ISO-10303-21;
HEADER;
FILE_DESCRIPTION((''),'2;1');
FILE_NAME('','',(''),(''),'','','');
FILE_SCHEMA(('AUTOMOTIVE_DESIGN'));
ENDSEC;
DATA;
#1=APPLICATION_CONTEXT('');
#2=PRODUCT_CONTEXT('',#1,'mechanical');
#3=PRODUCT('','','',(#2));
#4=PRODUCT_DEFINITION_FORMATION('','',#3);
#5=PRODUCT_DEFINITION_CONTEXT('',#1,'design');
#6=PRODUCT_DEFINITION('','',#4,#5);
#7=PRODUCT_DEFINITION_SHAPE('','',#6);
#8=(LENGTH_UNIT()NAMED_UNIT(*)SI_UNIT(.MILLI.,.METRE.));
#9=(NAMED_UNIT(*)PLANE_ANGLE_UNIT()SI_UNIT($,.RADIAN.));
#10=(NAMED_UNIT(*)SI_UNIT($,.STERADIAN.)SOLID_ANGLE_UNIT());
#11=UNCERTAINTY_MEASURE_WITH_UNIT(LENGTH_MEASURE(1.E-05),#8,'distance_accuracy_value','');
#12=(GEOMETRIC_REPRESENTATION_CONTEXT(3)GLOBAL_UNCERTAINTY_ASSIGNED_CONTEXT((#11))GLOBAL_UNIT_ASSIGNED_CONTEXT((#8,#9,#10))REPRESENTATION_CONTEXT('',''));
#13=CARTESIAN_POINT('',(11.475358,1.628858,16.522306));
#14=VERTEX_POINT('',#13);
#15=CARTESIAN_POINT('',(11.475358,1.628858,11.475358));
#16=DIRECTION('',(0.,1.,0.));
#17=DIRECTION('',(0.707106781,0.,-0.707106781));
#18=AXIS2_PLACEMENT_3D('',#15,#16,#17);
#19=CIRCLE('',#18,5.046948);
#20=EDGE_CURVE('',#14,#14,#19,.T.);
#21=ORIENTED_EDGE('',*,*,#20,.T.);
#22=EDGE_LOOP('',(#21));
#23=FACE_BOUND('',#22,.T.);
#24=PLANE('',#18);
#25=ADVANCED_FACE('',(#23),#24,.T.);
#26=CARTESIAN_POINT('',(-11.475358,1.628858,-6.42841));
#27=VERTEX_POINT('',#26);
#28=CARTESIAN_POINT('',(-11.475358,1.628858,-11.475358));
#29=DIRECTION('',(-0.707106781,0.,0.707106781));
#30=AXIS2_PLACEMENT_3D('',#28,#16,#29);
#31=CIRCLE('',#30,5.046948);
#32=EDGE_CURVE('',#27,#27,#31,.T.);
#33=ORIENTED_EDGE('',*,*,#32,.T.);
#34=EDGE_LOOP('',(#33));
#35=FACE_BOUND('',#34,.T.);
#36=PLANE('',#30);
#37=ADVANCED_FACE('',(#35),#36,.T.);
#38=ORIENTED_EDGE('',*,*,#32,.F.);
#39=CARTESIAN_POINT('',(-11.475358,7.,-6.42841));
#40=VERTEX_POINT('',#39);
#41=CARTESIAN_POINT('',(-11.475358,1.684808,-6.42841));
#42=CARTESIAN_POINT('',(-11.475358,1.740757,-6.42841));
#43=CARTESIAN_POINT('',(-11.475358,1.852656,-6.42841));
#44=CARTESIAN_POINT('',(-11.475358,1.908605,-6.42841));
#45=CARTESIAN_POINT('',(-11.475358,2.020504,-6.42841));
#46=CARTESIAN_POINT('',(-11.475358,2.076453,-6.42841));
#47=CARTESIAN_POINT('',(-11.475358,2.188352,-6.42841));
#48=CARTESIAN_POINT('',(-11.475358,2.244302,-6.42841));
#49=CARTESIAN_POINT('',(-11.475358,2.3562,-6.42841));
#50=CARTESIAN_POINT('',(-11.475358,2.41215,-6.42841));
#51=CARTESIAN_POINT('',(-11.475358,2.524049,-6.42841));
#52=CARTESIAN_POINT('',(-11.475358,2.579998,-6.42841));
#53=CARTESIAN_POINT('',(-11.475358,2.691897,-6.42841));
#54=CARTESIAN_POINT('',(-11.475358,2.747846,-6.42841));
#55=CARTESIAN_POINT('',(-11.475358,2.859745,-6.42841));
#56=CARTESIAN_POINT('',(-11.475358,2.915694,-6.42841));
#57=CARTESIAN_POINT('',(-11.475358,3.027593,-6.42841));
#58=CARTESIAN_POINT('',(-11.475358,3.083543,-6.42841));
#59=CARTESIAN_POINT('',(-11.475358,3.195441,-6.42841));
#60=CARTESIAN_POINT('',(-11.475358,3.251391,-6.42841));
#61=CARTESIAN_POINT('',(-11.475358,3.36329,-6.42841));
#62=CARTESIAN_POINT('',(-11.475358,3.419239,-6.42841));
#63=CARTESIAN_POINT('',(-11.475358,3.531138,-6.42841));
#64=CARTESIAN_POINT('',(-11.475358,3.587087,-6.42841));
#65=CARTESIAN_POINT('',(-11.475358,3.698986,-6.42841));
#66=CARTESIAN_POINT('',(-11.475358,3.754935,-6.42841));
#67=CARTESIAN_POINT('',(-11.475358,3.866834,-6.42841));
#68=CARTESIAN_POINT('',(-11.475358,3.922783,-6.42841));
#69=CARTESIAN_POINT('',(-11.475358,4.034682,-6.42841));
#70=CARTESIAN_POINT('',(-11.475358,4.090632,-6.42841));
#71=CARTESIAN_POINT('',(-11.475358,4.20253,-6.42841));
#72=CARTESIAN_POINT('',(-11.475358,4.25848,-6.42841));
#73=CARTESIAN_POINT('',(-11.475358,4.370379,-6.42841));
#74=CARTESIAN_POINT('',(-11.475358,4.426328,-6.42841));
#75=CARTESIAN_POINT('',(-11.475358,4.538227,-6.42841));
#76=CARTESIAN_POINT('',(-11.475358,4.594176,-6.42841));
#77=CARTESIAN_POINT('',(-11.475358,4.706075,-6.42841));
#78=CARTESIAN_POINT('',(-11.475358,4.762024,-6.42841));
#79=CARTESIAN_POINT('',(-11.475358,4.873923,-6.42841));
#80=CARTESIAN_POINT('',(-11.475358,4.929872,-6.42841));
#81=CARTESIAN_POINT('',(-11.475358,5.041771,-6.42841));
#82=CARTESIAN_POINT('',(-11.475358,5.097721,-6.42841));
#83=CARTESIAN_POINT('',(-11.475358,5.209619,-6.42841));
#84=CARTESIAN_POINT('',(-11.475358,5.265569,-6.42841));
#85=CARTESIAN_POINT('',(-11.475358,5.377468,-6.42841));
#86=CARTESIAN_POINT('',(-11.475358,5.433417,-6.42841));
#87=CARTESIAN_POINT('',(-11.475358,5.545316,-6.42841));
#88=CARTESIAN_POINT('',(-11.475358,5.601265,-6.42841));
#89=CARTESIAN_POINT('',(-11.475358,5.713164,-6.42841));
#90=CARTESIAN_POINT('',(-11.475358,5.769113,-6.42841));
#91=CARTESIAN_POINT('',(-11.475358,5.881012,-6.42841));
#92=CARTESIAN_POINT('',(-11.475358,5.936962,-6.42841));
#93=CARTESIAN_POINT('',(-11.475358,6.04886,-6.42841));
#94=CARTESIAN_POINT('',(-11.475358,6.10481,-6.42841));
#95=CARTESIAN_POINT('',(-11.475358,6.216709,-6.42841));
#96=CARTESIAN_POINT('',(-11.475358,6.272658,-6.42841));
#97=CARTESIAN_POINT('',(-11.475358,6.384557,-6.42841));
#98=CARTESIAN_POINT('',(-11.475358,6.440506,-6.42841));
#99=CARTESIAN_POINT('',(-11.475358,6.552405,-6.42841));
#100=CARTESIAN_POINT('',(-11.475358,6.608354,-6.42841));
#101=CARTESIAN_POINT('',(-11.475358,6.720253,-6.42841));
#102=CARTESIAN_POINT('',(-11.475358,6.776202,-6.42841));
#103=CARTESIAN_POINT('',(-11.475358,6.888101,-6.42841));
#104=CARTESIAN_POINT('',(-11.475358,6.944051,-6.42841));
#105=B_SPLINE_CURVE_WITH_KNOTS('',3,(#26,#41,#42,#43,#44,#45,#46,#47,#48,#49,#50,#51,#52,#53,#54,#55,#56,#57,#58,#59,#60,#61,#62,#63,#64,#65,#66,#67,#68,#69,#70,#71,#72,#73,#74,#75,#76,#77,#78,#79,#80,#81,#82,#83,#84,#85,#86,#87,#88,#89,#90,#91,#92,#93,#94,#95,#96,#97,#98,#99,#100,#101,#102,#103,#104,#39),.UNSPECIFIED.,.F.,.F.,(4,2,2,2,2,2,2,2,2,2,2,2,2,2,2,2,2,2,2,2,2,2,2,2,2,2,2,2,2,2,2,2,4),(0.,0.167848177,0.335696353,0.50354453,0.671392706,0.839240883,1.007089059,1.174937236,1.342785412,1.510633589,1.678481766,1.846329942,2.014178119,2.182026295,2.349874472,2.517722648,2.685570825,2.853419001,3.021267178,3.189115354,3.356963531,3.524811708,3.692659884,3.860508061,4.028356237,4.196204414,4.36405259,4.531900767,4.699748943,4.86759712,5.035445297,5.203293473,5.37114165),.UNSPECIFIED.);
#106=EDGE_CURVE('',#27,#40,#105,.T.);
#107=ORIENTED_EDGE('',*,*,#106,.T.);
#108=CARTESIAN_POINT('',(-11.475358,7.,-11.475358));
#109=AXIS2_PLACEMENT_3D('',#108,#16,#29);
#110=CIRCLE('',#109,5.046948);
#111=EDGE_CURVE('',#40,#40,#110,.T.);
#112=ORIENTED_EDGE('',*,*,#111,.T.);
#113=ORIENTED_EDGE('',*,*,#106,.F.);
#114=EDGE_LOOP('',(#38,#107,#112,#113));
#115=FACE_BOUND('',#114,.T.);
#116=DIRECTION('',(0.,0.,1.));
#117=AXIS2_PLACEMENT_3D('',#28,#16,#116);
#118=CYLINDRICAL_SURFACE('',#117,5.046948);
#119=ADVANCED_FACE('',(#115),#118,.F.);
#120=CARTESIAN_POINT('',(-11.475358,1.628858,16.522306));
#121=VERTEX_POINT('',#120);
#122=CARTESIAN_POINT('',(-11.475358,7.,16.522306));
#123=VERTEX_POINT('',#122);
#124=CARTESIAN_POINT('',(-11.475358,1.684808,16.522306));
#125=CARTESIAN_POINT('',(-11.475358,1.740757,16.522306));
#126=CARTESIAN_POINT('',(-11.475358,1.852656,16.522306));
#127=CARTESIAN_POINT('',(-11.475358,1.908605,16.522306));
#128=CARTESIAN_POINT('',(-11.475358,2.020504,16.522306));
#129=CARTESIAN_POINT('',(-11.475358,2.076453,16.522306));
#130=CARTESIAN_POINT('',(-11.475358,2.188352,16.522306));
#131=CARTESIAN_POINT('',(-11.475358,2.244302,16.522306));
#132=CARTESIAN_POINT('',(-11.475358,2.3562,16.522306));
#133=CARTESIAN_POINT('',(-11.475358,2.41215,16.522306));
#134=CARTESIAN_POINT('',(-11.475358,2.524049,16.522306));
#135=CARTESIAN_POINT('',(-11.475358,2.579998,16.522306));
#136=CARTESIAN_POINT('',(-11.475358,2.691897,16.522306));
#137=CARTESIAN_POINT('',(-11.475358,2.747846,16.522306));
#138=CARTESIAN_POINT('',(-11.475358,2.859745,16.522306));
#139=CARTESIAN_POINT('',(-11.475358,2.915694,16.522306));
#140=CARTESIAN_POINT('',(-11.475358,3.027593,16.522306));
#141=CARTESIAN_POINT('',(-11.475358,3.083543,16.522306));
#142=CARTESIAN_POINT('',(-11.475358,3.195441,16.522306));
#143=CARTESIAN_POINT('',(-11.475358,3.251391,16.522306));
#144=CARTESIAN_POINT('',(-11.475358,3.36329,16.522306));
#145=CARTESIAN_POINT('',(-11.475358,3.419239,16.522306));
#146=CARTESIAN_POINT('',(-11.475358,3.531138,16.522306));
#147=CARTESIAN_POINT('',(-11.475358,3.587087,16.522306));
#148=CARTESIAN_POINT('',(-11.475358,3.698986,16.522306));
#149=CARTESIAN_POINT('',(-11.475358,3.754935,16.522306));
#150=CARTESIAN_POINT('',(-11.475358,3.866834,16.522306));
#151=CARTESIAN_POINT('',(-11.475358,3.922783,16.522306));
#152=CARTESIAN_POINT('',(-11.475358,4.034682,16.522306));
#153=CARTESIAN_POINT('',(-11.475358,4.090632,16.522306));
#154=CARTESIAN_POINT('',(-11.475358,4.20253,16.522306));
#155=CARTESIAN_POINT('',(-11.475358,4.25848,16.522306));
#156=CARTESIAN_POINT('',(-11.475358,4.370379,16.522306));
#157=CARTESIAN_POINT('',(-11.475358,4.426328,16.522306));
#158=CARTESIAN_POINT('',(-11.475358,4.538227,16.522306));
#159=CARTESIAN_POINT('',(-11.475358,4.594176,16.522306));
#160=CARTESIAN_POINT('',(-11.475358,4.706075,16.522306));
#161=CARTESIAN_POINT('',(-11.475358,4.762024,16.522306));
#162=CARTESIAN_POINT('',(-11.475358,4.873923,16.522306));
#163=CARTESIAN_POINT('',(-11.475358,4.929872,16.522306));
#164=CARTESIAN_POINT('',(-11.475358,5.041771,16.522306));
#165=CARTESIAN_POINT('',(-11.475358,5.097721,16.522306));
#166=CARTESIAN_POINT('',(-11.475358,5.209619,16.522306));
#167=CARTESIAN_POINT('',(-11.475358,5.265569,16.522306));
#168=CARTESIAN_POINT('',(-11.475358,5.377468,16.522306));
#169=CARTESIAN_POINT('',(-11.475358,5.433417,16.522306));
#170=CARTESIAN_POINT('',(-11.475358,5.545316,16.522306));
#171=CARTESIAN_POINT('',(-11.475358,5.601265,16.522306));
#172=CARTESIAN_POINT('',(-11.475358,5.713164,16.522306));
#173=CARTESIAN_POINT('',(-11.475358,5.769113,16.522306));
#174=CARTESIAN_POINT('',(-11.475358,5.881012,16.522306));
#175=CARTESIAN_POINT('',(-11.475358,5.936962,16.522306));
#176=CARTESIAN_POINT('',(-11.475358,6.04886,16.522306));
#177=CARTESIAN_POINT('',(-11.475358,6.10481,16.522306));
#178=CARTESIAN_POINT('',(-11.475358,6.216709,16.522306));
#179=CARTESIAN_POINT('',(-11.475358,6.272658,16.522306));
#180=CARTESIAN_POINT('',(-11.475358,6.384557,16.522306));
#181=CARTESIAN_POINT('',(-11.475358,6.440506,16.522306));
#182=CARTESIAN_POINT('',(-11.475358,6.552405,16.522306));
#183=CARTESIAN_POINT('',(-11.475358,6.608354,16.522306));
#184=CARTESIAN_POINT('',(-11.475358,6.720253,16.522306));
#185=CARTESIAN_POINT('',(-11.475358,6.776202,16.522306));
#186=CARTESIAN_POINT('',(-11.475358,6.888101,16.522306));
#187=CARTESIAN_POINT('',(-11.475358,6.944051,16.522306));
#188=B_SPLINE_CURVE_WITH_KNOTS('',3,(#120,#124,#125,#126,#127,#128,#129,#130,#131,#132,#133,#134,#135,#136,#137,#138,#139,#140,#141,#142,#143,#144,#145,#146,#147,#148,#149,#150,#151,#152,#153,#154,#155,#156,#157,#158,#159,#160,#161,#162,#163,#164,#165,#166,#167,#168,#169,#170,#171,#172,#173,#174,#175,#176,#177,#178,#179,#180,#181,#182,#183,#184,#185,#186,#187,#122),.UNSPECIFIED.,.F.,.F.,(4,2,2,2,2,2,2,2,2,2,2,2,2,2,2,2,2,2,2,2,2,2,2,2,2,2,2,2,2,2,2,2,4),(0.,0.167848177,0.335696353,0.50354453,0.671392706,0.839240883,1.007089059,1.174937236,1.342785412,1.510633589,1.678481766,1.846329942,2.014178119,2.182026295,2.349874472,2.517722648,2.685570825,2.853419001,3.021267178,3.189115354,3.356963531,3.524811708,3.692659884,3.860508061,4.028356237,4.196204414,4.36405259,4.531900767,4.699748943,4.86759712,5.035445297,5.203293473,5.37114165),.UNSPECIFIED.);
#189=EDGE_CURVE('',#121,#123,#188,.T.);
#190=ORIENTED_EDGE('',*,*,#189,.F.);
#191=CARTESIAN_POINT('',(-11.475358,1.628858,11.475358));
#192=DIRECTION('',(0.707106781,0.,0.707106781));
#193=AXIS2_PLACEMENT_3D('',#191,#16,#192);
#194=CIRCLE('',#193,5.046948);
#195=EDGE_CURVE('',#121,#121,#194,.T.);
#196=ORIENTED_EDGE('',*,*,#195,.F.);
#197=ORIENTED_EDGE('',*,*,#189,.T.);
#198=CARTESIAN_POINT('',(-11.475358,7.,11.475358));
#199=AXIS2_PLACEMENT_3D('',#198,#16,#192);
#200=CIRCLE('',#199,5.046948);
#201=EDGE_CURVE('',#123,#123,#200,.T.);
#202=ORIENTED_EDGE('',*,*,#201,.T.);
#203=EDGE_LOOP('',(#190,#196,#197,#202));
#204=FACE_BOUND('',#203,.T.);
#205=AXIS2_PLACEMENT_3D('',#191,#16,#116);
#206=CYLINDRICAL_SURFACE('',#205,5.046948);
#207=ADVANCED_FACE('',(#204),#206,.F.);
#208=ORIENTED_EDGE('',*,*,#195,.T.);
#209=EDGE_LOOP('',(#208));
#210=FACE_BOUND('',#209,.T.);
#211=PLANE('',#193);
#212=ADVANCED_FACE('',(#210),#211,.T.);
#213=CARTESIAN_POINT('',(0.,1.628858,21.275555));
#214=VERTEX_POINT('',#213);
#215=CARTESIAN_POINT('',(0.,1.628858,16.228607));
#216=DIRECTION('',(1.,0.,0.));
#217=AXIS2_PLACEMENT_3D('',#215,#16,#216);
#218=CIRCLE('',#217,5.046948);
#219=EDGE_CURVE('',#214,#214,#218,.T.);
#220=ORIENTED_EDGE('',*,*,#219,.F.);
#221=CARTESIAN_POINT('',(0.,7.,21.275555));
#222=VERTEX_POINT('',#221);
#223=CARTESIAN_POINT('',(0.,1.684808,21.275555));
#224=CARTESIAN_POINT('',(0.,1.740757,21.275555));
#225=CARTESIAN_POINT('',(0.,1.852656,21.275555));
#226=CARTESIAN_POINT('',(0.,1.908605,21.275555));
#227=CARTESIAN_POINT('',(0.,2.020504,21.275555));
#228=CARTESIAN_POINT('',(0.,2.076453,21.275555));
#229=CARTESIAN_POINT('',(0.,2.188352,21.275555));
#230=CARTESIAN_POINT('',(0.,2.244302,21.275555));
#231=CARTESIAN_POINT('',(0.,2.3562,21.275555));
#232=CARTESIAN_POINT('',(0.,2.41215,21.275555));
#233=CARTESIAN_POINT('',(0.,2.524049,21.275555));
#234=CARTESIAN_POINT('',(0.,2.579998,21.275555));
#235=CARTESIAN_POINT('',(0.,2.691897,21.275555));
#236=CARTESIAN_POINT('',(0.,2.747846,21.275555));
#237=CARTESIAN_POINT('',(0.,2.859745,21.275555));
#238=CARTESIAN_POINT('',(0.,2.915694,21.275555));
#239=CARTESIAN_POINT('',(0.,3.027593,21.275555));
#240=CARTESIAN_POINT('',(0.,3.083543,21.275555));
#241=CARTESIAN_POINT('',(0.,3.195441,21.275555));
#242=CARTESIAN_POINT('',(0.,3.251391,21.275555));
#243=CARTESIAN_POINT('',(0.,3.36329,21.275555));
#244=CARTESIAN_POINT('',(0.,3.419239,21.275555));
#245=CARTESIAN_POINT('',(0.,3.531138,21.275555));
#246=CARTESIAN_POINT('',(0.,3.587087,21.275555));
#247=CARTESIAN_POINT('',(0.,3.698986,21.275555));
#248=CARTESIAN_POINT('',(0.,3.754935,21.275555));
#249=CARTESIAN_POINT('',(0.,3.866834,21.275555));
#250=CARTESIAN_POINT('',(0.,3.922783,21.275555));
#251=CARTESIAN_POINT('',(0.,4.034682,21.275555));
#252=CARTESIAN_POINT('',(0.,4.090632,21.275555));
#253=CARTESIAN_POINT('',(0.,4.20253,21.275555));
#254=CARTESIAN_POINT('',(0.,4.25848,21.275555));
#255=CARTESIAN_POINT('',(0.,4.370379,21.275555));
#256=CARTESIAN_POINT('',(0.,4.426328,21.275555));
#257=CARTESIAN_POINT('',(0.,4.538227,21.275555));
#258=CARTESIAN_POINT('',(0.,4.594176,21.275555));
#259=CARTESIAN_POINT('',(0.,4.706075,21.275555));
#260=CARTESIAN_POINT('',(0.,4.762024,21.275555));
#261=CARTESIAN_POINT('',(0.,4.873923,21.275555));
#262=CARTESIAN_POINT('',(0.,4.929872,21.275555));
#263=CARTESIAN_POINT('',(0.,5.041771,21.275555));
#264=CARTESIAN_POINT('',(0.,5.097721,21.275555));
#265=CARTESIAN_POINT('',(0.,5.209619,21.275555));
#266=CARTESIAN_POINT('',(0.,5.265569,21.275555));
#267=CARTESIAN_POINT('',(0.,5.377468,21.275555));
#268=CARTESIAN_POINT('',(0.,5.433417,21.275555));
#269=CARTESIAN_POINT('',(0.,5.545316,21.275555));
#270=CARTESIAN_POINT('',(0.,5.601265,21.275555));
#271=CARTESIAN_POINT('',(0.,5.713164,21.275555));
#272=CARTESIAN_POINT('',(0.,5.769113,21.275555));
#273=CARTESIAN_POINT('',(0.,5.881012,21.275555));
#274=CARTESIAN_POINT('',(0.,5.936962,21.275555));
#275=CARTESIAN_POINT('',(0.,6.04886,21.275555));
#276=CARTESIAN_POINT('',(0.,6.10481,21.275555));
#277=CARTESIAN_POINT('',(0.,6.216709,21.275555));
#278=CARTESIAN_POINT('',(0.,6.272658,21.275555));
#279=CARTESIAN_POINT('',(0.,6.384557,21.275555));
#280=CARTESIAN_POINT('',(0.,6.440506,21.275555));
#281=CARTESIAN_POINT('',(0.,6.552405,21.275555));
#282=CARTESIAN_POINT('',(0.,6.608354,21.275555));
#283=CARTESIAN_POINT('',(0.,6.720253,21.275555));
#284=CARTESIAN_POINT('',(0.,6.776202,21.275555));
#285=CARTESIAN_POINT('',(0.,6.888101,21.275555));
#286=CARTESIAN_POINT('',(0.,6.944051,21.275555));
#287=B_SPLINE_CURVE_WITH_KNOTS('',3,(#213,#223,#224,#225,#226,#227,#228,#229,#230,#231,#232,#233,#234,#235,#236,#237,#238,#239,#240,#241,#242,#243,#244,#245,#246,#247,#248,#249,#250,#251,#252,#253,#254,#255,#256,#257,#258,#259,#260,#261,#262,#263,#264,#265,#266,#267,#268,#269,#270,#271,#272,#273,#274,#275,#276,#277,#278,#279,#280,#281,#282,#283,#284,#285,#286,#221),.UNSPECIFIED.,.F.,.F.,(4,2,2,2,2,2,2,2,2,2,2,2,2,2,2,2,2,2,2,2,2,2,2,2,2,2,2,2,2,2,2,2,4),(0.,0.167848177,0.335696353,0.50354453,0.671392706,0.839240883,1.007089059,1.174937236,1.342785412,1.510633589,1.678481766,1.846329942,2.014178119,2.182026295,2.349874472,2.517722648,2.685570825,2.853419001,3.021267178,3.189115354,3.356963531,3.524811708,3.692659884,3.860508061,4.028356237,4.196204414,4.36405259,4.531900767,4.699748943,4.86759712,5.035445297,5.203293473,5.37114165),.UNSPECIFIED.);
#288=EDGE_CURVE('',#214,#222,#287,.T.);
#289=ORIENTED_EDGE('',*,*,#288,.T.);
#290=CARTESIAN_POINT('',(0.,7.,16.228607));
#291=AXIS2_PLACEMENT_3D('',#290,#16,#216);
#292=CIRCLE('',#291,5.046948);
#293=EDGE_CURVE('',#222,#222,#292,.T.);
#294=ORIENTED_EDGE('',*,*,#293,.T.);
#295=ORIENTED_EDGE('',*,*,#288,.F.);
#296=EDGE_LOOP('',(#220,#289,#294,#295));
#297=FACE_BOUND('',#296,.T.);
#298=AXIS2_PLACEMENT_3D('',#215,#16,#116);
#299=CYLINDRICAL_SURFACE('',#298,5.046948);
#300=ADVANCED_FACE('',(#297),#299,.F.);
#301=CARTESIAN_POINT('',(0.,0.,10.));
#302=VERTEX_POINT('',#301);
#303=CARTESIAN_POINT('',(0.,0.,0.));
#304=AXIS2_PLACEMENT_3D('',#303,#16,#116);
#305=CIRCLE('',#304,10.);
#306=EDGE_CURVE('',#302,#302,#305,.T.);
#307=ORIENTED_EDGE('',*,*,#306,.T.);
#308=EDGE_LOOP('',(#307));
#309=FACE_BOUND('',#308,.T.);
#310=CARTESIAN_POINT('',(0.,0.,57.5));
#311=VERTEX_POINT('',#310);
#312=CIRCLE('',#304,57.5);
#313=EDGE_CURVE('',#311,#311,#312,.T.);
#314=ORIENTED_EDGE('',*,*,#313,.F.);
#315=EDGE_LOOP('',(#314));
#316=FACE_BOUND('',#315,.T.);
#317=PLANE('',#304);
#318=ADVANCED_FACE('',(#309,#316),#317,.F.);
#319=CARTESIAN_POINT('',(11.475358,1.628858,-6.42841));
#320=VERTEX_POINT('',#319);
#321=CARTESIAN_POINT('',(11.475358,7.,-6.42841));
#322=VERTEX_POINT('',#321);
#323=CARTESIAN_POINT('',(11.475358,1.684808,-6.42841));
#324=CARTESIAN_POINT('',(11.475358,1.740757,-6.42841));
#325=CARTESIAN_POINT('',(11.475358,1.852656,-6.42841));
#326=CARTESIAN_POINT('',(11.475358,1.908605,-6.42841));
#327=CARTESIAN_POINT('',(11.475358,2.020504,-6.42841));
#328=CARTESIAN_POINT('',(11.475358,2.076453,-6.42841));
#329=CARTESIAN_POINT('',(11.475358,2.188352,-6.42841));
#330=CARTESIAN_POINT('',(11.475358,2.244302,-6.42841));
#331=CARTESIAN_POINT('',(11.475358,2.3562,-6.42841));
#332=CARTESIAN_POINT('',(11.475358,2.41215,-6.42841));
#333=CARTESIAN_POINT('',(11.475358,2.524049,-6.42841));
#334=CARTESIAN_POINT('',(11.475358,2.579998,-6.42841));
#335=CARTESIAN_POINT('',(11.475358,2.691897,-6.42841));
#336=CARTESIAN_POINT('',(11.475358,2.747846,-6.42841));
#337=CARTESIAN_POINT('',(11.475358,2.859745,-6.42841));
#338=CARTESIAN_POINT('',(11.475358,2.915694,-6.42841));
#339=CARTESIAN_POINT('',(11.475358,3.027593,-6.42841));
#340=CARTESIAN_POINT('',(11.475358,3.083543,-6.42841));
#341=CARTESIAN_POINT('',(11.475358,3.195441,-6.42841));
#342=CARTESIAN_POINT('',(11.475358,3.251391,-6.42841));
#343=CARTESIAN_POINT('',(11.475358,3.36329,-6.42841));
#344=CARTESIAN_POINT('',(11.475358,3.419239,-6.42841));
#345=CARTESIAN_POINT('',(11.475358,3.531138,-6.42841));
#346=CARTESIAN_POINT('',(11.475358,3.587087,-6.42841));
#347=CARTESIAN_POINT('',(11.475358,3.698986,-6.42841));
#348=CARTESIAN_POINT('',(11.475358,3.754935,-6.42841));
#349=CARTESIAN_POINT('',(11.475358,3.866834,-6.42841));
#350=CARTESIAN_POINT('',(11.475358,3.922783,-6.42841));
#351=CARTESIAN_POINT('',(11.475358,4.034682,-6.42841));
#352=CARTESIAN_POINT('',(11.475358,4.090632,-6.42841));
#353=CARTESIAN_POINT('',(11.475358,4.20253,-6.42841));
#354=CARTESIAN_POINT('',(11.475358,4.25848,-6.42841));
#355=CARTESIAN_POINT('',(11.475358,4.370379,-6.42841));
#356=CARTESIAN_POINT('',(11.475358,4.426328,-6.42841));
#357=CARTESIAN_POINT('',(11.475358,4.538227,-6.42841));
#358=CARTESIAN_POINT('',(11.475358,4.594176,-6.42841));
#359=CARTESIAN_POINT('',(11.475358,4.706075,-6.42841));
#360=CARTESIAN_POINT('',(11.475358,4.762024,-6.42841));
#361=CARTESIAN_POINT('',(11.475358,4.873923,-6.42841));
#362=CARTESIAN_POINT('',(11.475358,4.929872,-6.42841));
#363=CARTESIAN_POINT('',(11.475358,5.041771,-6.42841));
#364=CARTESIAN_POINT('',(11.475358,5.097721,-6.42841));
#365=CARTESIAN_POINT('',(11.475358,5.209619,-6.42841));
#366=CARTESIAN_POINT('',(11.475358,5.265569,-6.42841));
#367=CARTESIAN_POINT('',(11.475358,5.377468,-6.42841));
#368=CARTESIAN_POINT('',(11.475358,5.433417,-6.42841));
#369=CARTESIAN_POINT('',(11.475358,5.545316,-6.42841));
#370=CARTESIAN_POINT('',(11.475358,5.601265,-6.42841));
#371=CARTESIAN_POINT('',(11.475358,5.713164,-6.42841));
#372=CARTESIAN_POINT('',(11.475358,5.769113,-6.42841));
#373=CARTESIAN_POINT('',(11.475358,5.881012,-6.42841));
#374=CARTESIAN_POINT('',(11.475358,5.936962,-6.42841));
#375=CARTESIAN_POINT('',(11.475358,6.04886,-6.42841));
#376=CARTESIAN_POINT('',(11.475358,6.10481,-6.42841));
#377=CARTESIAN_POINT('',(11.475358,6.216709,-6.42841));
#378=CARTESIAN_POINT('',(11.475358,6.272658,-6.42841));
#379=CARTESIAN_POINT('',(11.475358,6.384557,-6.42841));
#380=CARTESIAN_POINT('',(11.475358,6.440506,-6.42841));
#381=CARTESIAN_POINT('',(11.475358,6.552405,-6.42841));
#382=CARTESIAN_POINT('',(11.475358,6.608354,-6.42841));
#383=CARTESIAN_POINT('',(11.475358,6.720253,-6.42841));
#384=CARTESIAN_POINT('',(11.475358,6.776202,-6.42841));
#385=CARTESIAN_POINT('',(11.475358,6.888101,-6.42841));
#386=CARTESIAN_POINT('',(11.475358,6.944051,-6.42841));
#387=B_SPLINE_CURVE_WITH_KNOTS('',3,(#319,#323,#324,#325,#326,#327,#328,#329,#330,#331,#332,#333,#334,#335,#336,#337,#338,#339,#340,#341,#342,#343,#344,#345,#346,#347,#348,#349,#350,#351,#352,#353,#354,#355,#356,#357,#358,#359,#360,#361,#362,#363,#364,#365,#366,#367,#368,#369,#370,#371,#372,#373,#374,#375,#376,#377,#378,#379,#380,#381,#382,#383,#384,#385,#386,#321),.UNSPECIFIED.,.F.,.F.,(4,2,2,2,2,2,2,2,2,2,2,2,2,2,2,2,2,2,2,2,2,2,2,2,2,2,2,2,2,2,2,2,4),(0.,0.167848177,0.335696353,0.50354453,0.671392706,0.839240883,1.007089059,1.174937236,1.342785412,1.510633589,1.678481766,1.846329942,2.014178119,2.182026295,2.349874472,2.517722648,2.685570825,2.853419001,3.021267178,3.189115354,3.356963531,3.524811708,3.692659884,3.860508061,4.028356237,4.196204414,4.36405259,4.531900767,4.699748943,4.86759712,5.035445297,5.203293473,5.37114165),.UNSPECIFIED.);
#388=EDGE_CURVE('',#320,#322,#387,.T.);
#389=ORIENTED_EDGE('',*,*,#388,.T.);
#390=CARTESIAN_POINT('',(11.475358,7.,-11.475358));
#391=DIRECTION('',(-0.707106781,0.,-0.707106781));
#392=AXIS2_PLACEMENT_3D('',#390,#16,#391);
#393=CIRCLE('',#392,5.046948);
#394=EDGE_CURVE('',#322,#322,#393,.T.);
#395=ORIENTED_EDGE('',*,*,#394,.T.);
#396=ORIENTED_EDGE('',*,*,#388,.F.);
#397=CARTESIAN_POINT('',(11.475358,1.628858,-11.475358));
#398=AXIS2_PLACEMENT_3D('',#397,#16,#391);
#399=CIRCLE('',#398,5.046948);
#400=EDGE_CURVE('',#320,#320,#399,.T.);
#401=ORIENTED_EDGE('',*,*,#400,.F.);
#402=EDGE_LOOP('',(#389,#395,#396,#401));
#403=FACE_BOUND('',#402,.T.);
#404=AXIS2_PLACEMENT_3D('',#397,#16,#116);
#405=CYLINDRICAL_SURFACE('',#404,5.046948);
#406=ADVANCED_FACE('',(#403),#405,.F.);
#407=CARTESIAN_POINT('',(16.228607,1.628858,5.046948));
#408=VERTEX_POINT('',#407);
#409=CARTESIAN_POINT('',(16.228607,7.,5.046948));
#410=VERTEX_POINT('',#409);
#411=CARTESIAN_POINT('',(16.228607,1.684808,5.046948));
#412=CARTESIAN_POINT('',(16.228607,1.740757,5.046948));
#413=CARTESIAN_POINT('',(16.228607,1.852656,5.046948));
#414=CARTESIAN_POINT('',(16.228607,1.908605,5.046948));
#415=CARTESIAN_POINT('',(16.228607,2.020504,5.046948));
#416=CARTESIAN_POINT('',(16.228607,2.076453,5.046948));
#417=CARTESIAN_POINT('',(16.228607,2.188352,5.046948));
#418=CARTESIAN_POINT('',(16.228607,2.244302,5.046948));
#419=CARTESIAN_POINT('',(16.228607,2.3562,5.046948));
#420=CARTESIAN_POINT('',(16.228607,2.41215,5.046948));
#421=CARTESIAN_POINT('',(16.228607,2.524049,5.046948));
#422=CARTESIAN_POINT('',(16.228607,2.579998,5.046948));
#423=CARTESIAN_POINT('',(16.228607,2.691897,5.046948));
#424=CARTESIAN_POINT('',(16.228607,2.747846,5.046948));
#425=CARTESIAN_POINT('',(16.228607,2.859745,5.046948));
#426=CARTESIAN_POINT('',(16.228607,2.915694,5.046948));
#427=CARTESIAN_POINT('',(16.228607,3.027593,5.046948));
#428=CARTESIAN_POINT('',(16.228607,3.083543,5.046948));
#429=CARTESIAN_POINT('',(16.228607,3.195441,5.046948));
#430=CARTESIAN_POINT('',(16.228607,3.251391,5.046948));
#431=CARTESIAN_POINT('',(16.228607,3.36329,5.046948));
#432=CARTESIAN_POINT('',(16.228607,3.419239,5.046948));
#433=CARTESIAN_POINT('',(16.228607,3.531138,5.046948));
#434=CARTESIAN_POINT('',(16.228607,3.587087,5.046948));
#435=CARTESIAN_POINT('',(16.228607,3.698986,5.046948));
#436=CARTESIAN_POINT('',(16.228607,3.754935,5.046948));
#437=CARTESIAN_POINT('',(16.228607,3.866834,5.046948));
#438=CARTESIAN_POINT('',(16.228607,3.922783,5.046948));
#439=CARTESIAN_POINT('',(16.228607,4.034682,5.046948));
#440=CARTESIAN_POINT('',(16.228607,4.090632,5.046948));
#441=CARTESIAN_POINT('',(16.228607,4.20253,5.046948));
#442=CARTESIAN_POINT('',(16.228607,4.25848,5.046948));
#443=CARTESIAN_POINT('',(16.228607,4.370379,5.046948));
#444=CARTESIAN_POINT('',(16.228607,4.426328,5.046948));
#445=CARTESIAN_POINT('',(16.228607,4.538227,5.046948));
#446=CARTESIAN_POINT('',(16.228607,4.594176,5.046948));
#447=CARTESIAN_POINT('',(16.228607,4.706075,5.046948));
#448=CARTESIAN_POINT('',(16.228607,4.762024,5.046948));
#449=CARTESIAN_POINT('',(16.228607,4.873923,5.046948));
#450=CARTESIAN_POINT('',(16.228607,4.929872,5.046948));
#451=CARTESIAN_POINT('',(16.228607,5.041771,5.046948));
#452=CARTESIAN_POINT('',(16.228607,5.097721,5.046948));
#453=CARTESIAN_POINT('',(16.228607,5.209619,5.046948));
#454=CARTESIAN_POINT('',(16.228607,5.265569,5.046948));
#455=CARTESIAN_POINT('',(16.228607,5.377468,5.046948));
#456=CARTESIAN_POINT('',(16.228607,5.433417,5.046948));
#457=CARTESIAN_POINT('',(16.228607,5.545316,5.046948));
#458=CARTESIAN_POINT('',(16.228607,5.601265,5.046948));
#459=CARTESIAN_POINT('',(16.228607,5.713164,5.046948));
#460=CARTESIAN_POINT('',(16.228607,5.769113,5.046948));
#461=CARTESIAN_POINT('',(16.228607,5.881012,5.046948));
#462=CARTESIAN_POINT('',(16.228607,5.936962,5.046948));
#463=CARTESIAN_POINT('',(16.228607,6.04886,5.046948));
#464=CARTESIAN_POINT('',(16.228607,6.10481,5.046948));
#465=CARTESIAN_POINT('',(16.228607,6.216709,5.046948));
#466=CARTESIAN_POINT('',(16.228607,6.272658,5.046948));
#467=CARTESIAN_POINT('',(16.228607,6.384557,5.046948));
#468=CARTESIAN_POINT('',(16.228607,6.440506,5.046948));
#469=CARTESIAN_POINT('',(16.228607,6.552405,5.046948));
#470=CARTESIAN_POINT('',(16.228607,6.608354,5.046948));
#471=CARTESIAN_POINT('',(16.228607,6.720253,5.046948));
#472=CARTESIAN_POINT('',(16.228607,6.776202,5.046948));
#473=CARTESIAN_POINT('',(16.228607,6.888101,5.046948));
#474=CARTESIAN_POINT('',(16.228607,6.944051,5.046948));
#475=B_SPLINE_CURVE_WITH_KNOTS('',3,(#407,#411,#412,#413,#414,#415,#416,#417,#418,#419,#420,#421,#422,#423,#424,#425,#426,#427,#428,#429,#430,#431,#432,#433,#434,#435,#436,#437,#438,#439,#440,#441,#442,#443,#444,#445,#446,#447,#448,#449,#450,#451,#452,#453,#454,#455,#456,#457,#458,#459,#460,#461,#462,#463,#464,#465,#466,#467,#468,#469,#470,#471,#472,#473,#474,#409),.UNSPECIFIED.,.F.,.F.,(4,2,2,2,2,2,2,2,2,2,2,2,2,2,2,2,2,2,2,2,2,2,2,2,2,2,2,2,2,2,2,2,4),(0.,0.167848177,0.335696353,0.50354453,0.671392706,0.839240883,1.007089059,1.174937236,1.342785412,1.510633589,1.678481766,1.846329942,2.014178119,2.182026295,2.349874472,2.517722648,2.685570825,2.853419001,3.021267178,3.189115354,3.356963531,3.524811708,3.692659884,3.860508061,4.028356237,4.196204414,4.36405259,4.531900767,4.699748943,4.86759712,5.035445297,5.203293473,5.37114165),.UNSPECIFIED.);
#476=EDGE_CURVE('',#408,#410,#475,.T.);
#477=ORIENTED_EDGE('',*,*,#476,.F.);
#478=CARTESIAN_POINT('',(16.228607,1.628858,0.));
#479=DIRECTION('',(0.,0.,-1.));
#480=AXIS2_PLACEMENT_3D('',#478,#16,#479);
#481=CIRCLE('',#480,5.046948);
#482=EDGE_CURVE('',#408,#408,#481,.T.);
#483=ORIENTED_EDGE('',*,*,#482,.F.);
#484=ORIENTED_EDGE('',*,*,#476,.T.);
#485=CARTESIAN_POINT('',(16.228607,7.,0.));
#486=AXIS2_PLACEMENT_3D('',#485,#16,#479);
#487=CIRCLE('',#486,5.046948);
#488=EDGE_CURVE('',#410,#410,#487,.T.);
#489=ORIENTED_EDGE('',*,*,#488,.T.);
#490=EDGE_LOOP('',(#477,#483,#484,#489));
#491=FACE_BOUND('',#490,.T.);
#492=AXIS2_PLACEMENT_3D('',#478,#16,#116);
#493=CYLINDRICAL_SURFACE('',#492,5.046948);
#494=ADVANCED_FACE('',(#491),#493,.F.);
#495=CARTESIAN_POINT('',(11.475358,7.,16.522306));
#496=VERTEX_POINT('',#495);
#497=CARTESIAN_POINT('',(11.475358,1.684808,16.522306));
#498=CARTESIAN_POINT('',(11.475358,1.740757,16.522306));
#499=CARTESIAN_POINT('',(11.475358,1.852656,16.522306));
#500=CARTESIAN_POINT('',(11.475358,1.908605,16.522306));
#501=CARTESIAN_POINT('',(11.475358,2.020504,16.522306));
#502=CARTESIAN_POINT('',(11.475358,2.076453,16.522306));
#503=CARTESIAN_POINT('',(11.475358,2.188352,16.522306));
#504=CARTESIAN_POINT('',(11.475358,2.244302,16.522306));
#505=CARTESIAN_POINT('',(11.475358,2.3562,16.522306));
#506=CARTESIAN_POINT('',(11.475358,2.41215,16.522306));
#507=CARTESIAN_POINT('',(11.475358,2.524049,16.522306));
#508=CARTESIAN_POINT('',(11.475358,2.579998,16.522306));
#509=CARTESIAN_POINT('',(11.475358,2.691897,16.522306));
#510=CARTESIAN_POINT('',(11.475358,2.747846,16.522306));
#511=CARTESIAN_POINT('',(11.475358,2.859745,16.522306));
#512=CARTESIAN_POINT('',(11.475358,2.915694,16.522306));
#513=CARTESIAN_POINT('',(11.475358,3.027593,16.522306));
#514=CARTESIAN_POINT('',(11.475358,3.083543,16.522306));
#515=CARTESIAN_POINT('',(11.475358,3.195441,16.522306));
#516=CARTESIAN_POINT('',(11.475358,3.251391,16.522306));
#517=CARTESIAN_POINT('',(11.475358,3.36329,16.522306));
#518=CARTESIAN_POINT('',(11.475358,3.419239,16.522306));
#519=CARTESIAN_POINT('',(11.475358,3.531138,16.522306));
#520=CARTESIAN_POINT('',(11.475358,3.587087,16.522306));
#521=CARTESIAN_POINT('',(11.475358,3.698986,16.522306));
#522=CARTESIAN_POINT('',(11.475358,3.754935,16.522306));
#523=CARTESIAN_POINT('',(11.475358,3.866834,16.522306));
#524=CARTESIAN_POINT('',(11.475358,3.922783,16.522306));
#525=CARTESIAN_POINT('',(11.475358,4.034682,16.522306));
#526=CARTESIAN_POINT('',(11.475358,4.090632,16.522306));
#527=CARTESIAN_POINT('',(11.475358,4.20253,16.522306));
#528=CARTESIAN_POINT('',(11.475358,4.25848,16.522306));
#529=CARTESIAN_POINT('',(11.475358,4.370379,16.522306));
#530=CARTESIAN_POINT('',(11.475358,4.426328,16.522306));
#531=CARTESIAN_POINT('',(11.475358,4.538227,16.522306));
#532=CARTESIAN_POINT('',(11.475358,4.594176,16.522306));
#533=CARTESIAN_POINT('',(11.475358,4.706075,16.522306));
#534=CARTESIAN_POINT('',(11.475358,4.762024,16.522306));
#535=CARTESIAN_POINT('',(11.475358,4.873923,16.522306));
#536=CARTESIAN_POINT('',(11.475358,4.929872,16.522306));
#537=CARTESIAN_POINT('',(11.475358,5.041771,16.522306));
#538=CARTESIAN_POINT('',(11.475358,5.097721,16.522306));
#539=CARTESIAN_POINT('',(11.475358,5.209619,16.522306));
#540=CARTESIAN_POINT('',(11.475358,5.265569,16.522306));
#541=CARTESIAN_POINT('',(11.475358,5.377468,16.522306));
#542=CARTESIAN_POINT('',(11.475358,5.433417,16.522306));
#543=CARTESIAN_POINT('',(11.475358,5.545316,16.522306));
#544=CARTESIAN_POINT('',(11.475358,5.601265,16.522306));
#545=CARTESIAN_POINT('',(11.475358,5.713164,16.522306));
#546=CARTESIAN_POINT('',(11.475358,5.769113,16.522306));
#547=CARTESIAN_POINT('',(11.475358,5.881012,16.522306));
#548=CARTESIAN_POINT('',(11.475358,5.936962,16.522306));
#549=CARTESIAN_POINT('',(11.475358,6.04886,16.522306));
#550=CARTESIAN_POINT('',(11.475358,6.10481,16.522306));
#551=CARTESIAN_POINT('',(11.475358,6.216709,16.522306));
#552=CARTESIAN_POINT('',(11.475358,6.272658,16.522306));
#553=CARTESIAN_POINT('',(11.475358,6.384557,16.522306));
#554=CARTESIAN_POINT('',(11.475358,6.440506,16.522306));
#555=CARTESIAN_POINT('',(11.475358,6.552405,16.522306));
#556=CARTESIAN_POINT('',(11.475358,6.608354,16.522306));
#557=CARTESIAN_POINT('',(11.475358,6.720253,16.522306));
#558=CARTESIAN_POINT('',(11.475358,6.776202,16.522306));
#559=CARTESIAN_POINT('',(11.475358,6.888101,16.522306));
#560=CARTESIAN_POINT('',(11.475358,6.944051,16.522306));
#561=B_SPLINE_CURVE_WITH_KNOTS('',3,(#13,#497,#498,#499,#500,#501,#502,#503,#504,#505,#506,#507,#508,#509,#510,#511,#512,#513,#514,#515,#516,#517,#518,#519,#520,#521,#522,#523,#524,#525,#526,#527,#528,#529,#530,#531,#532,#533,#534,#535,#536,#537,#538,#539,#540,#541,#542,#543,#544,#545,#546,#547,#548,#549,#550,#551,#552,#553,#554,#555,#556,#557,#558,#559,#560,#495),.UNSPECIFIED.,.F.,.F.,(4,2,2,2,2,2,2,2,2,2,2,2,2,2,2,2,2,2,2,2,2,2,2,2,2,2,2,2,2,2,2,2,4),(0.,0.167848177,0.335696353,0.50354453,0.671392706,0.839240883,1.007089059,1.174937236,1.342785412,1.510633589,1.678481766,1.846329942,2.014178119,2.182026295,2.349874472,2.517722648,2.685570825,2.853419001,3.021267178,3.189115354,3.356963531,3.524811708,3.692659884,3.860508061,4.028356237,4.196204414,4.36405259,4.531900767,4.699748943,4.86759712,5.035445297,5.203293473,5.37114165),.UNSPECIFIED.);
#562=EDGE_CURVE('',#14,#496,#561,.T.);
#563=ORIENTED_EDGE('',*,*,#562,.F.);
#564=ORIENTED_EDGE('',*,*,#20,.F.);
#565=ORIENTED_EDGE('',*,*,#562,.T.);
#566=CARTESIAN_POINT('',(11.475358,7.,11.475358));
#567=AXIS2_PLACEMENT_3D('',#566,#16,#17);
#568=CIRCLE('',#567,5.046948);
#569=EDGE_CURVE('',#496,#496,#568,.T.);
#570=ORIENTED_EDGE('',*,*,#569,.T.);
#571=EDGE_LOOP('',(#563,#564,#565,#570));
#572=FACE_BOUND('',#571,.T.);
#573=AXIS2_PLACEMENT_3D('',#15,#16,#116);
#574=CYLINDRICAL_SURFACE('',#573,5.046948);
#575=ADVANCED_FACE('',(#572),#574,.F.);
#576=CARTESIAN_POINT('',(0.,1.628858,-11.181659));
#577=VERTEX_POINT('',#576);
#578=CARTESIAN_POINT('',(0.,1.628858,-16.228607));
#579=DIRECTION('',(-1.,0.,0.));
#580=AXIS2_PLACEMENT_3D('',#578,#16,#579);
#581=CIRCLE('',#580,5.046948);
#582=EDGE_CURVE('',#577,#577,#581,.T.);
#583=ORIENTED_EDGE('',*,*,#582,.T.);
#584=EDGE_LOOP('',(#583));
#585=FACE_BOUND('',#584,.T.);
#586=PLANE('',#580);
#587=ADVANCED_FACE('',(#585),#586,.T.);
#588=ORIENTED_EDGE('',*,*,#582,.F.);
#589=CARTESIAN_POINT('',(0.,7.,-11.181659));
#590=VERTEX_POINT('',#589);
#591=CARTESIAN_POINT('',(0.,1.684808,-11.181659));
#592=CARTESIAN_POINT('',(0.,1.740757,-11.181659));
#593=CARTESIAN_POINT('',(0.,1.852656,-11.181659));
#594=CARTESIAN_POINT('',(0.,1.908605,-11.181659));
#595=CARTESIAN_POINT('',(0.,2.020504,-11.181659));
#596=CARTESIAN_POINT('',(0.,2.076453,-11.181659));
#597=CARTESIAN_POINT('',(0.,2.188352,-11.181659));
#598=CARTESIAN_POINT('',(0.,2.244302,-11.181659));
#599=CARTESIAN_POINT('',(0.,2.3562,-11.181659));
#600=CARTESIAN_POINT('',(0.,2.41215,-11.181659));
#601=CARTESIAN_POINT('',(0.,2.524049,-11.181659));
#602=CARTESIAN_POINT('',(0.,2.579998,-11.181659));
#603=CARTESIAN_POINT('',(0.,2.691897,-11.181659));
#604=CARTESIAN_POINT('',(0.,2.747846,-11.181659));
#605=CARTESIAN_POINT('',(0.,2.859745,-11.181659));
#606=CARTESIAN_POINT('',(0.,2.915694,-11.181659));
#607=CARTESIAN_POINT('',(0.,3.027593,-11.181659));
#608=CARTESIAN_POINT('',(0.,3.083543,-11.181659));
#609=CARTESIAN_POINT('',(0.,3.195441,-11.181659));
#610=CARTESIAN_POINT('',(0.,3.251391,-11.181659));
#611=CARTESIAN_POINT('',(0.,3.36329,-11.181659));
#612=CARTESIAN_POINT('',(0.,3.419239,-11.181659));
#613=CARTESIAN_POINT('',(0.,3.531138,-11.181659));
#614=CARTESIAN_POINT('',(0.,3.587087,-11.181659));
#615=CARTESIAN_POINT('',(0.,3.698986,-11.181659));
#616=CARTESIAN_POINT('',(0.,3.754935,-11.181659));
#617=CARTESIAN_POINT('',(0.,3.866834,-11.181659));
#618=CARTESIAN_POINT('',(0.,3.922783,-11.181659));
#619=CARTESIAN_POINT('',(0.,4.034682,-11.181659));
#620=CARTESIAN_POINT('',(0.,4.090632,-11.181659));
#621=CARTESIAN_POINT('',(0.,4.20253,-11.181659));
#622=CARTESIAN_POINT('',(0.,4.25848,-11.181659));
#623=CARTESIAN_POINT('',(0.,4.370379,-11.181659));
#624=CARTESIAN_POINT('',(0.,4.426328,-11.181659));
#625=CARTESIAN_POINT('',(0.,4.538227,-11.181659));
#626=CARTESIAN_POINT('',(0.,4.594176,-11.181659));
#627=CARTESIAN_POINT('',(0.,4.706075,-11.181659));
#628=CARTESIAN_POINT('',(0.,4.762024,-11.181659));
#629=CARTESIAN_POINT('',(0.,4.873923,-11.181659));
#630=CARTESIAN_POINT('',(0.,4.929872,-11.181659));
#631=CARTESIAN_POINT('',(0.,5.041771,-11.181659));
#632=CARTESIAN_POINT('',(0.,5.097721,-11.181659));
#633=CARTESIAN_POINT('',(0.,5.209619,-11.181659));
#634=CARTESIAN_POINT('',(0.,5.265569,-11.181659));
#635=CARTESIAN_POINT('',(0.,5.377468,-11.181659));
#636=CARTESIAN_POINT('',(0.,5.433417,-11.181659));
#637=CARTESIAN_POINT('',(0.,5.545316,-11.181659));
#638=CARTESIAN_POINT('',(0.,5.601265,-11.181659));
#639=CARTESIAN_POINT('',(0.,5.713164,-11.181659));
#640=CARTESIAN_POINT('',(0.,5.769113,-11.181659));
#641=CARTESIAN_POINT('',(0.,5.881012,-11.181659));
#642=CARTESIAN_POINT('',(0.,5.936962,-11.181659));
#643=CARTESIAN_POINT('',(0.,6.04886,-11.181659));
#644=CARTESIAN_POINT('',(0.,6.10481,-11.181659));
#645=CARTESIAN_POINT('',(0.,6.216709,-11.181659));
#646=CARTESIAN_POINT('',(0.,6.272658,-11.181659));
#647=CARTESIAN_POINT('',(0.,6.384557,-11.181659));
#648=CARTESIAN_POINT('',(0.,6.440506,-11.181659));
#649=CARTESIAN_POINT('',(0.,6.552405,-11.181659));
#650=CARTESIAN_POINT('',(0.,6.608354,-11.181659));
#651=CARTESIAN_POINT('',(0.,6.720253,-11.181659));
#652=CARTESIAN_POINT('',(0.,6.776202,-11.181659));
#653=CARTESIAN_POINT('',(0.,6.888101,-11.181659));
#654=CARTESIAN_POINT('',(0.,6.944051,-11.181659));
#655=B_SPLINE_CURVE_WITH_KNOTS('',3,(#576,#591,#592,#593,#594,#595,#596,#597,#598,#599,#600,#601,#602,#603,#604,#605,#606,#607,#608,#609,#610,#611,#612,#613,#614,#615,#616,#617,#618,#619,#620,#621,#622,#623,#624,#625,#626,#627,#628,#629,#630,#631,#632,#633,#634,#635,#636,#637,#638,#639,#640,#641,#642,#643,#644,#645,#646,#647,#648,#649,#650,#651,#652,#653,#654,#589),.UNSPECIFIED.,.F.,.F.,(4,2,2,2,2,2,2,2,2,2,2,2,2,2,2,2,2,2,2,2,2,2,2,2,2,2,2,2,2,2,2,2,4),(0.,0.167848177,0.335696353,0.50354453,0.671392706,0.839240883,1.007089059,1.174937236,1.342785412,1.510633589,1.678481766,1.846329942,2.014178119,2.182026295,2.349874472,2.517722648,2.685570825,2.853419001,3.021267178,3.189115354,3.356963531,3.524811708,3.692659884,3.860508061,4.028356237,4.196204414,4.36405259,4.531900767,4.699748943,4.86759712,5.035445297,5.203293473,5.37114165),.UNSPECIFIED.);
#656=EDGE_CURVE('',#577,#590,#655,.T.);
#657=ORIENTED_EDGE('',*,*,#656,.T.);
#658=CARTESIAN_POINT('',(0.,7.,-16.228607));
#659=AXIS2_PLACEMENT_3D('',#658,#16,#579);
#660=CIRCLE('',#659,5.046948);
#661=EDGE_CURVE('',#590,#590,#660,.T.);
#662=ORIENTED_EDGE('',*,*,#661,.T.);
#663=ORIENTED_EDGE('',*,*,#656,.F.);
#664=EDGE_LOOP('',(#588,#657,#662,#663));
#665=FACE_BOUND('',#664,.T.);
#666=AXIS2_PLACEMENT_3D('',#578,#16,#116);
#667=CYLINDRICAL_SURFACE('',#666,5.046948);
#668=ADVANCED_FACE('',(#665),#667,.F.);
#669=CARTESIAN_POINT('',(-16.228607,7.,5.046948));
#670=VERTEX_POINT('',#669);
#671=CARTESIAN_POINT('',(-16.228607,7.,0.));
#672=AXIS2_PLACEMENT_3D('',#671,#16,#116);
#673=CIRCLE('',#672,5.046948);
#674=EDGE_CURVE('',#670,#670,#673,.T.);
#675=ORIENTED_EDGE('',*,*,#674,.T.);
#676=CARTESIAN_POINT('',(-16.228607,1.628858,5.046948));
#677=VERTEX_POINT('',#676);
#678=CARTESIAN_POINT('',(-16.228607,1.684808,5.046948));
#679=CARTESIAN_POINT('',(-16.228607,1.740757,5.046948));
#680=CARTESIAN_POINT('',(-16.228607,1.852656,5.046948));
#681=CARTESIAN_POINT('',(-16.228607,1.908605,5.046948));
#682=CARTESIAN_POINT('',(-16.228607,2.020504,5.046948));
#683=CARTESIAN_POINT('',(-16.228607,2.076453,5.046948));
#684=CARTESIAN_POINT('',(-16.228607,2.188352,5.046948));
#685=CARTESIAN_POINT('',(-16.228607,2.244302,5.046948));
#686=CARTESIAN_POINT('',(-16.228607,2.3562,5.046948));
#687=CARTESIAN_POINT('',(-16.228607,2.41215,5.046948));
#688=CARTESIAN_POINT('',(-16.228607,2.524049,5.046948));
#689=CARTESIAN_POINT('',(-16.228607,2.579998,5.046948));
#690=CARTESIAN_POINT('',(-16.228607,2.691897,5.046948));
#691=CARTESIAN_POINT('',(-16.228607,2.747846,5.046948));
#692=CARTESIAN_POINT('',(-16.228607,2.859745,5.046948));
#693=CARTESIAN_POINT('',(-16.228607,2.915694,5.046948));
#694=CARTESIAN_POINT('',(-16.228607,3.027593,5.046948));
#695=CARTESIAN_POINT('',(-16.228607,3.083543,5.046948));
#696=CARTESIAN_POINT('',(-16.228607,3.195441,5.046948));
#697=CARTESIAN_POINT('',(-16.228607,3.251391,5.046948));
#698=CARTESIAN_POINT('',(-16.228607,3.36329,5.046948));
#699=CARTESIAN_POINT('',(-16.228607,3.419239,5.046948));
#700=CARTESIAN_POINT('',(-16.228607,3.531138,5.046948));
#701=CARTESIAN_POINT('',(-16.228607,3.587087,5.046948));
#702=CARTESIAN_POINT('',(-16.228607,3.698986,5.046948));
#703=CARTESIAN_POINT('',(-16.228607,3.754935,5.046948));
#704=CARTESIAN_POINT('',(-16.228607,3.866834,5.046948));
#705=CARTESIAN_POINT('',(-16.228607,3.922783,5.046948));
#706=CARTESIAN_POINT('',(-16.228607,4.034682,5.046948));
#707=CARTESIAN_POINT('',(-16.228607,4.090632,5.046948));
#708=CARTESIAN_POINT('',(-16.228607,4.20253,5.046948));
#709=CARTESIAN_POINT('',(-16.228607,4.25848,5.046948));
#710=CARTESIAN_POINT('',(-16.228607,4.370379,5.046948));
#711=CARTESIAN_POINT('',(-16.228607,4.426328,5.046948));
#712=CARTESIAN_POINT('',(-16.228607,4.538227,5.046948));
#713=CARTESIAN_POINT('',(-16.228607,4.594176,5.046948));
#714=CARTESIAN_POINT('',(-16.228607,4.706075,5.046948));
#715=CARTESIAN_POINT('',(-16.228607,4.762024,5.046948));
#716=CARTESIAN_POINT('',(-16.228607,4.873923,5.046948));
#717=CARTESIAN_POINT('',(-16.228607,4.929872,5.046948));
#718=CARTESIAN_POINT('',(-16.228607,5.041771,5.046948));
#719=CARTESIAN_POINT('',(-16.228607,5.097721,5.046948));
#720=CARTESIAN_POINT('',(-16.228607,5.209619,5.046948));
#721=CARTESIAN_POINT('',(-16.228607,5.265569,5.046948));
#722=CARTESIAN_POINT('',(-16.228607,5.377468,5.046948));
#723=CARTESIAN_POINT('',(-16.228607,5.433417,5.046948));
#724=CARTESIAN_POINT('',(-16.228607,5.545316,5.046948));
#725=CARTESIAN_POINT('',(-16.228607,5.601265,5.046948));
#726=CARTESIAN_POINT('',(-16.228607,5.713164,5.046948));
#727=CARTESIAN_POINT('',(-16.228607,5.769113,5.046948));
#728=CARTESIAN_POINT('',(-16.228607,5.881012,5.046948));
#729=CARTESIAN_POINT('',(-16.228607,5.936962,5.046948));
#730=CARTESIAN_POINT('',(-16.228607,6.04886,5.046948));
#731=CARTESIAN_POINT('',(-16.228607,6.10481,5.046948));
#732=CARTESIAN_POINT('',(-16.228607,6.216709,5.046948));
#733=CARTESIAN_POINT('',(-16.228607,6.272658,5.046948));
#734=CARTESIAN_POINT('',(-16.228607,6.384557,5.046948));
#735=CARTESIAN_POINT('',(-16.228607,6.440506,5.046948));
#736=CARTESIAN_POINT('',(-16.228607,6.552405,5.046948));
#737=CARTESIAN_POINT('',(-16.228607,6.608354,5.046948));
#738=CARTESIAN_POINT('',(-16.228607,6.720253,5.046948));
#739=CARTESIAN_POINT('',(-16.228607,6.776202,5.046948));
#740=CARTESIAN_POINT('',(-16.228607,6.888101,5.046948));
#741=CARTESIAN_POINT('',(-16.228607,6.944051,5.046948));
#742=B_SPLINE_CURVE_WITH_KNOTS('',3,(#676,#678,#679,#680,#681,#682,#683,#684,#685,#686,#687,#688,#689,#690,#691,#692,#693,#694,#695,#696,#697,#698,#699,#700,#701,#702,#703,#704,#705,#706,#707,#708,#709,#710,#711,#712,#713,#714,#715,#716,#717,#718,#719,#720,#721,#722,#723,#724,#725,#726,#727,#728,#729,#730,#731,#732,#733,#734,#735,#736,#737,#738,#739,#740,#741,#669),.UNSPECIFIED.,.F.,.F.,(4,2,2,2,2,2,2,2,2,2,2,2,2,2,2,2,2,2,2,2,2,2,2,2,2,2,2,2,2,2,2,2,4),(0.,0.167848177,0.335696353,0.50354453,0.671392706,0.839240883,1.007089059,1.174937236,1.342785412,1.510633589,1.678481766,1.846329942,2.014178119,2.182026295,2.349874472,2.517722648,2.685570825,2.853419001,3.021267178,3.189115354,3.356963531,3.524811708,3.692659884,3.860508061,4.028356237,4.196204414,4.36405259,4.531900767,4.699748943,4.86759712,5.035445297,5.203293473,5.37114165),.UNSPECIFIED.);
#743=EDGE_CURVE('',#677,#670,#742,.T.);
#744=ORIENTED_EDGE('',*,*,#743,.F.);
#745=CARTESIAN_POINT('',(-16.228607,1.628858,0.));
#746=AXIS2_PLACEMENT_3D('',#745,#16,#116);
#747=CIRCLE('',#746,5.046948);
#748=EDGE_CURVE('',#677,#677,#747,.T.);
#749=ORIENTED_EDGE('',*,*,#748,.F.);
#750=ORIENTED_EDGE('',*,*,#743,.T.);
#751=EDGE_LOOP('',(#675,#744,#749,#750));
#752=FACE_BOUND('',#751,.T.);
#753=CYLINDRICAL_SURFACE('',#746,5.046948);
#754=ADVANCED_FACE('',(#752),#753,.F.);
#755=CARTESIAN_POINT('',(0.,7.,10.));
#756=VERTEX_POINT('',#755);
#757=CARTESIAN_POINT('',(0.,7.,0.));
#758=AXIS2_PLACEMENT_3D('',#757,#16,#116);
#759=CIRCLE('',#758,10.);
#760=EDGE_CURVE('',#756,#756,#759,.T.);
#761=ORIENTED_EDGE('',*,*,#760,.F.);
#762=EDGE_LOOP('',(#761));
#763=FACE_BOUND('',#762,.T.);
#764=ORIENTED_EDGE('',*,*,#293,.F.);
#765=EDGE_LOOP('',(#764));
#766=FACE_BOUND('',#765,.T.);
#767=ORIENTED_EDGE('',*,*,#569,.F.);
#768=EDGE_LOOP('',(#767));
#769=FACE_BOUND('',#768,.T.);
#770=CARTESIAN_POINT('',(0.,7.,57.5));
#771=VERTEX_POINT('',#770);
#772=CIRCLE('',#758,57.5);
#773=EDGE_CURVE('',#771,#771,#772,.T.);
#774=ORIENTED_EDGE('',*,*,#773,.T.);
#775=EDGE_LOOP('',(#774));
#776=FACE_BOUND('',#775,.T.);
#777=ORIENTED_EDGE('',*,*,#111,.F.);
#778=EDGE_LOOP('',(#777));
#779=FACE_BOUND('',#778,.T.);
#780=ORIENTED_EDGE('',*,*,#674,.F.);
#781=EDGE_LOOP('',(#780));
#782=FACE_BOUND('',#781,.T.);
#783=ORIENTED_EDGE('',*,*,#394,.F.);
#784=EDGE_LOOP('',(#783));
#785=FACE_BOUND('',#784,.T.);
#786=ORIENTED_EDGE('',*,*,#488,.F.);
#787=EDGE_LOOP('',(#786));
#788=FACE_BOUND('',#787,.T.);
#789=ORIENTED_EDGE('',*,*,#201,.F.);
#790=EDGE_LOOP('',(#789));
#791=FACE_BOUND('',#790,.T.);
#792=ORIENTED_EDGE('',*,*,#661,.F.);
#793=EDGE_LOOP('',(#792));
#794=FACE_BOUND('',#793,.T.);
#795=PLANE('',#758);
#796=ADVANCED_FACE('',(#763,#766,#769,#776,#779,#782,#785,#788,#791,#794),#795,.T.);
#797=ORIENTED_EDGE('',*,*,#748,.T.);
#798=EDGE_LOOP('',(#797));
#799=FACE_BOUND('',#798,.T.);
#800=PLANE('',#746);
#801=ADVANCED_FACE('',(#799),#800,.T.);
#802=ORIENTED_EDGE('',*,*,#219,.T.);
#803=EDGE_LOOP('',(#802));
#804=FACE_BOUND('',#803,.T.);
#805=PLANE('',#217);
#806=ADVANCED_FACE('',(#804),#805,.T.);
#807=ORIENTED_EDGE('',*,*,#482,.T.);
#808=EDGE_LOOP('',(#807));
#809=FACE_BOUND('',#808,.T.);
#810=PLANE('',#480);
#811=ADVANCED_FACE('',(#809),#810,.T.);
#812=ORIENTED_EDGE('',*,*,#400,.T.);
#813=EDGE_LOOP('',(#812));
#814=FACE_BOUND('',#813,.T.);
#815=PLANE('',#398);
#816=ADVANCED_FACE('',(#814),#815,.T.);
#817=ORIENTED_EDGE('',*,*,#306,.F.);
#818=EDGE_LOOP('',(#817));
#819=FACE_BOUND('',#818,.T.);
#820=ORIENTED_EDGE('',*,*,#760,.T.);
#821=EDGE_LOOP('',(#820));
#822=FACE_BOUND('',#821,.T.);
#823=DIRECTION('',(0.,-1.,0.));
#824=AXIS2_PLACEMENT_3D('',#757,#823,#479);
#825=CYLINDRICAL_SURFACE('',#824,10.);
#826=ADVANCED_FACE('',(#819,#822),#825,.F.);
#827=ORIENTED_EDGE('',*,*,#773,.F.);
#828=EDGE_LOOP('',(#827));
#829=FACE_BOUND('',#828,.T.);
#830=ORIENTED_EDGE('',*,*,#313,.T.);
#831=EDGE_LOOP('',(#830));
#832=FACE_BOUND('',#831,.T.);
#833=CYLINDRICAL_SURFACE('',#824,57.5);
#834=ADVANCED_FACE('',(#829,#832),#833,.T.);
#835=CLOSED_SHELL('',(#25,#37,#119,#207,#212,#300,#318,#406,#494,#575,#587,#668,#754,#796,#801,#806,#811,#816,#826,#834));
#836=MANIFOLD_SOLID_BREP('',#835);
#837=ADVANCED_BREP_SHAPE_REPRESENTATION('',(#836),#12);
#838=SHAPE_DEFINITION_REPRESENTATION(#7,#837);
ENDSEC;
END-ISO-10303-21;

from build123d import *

# Parameters (mm, degrees)
SKETCH1_R           = 57.5
BOSS_EXTRUDE1_DEPTH = 7
SKETCH2_R           = 10
CUT_EXTRUDE1_DEPTH  = 82.618012718
SKETCH3_R           = 5.046948053
CUT_EXTRUDE2_DEPTH  = 5.37114165
CIRPATTERN1_COUNT   = 8


with BuildPart() as part:
    # Sketch1 → Boss-Extrude1 (new body)
    with BuildSketch(Plane(origin=(0, 0, 0), x_dir=(1, 0, 0), z_dir=(0, 1, 0))):
        Circle(SKETCH1_R)
    extrude(amount=BOSS_EXTRUDE1_DEPTH)

    # Sketch2 → Cut-Extrude1 (cut, through all)
    with BuildSketch(Plane(origin=(0, 0, 0), x_dir=(1, 0, 0), z_dir=(0, 1, 0))):
        Circle(SKETCH2_R)
    extrude(amount=CUT_EXTRUDE1_DEPTH, mode=Mode.SUBTRACT)

    # Sketch3 → Cut-Extrude2 (cut)
    with BuildSketch(Plane(origin=(0, 7, 0), x_dir=(1, 0, 0), z_dir=(0, 1, 0))):
        with Locations((-16.228606561, 0)):
            Circle(SKETCH3_R)
    cut_extrude2 = extrude(amount=-CUT_EXTRUDE2_DEPTH, mode=Mode.SUBTRACT)

    # CirPattern1: Cut-Extrude2 ×8 about axis
    cirpattern1_axis = Axis((0, 0, 0), (0, 1, 0))
    for i in range(1, CIRPATTERN1_COUNT):
        add(cut_extrude2.rotate(cirpattern1_axis, i * 360 / CIRPATTERN1_COUNT), mode=Mode.SUBTRACT)


solid = part.part
